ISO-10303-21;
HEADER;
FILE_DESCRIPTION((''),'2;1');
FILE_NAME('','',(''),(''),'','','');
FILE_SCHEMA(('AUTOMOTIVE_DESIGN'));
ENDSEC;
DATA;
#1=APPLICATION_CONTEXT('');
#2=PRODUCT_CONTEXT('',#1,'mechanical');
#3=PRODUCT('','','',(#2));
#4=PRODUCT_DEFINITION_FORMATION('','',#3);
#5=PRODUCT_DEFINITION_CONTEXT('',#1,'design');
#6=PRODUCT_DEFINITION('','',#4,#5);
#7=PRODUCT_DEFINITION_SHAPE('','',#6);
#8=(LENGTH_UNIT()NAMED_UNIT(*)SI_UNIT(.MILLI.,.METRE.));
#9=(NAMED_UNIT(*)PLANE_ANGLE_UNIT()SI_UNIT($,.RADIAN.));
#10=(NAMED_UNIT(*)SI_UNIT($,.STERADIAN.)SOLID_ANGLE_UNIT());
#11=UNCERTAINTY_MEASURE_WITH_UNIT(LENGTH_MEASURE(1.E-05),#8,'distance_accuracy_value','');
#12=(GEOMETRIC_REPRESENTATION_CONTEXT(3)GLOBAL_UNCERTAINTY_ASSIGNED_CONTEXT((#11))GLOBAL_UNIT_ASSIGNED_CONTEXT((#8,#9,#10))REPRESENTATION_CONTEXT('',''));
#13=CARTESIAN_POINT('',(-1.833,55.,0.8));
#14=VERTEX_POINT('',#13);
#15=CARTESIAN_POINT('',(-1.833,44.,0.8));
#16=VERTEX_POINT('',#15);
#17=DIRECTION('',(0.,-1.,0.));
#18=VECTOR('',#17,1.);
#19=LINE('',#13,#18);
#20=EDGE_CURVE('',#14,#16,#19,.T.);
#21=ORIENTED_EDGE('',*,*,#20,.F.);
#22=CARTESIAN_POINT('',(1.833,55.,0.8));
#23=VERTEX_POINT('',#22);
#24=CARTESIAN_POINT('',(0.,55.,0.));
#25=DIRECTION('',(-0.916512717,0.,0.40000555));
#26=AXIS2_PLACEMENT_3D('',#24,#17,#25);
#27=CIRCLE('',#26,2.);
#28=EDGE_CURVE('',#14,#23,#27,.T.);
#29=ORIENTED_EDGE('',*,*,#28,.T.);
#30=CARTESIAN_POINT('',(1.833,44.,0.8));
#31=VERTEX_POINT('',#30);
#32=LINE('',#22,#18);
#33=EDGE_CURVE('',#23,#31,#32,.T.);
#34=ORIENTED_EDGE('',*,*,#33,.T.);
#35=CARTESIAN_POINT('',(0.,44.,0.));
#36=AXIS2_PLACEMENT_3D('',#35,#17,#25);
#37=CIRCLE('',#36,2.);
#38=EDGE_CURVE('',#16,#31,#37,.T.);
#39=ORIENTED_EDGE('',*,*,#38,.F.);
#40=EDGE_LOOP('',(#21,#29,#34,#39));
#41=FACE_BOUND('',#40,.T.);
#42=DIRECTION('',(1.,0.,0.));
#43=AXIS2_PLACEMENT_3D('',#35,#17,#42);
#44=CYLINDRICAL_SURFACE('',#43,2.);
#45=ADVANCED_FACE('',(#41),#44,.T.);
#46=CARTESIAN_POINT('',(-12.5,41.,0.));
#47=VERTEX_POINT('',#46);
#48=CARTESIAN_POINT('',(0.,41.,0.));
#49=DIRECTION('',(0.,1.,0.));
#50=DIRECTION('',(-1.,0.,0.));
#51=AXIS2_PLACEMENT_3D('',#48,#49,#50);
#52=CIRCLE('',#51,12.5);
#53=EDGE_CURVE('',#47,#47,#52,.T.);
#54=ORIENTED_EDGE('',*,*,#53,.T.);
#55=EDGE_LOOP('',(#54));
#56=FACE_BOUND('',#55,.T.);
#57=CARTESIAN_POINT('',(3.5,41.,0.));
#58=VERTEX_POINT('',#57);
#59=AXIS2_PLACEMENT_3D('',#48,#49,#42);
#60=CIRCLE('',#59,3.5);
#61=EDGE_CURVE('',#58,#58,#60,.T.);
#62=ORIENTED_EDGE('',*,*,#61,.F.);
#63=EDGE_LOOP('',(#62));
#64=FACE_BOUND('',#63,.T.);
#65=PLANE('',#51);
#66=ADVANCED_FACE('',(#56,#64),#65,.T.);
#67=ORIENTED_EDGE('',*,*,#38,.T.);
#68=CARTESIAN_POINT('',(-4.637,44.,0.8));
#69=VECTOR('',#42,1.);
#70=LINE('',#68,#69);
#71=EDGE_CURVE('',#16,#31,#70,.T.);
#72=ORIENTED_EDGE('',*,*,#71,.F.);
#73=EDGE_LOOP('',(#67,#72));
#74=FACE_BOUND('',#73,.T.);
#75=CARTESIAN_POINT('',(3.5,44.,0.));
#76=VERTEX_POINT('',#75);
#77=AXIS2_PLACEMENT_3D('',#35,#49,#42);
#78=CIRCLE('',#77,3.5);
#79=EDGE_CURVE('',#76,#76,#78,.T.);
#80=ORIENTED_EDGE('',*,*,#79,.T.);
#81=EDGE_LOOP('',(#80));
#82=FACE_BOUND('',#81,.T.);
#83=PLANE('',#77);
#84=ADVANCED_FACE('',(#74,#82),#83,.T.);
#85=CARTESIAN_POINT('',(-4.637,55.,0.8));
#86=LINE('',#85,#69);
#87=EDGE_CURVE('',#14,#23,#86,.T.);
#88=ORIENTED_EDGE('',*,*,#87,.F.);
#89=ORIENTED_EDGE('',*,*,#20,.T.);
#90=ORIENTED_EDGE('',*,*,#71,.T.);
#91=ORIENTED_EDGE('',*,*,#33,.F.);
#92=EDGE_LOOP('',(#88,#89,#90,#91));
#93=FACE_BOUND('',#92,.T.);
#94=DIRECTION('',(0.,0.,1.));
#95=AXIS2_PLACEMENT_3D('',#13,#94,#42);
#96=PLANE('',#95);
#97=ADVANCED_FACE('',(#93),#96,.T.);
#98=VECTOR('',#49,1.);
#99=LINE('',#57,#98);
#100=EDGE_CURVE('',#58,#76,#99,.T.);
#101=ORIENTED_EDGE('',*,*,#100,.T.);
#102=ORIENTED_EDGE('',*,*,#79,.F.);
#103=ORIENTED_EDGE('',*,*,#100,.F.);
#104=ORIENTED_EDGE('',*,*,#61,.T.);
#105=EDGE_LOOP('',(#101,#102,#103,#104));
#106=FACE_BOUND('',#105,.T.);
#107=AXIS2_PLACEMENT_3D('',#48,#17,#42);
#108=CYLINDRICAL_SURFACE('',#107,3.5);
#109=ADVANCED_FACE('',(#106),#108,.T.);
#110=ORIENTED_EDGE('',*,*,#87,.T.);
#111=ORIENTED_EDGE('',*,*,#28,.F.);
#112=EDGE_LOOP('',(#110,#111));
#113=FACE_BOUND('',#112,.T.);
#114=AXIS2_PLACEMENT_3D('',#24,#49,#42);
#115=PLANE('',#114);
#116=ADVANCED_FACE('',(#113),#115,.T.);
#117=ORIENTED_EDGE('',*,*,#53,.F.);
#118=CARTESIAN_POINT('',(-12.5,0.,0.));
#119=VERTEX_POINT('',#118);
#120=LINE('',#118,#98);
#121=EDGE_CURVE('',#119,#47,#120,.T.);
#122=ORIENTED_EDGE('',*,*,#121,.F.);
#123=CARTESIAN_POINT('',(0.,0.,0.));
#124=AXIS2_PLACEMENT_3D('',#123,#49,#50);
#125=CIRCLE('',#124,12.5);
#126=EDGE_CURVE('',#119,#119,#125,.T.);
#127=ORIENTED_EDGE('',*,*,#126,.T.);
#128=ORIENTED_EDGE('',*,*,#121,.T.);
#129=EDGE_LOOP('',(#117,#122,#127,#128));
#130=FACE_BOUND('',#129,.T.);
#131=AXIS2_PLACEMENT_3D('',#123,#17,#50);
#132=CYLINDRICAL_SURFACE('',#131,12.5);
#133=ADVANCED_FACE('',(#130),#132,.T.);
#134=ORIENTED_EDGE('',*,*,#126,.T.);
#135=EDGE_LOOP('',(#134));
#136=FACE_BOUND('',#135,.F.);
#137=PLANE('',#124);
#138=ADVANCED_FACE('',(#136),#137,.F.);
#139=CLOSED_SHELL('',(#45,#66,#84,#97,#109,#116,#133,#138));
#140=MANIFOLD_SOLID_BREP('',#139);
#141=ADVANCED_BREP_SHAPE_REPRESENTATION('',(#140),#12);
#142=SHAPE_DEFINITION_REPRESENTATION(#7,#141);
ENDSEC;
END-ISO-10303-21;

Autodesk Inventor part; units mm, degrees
ref_plane "YZ Plane" through (0, 0, 0) normal (1, 0, 0) x (0, 1, 0)
ref_plane "XZ Plane" through (0, 0, 0) normal (0, 1, 0) x (-1, 0, 0)
ref_plane "XY Plane" through (0, 0, 0) normal (0, 0, 1) x (1, 0, 0)
sketch "草图1" plane through (0, 0, 0) normal (0, 1, 0) x (-1, 0, 0)
  circle A0 centre (0, 0) radius 12.5
  dimension "d0" = 25
extrude "拉伸1" add sketch "草图1" along normal blind 41
sketch "草图2" plane through (0, 41, 0) normal (0, 1, 0) x (1, 0, 0)
  circle A0 centre (0, 0) radius 3.5
  dimension "d3" = 7
extrude "拉伸2" add sketch "草图2" along normal blind 3
sketch "草图3" plane through (0, 44, 0) normal (0, 1, 0) x (1, 0, 0)
  circle A0 centre (0, 0) radius 2
  dimension "d6" = 4
extrude "拉伸3" add sketch "草图3" along normal blind 11
sketch "草图4" plane through (0, 55, 0) normal (0, 1, 0) x (1, 0, 0)
  line L0 (-4.637, -0.8) -> (5.5705, -0.8)
  line L1 (-17.5, 0) -> (17.5, 0) projected
  arc A0 (-1.833, -0.8) -> (1.833, -0.8) centre (0, 0) ccw
  dimension "d9" = 0.8
  dimension "d10" = 2
extrude "拉伸4" cut sketch "草图4" against normal blind 11
properties part number "电机" material "金色"
